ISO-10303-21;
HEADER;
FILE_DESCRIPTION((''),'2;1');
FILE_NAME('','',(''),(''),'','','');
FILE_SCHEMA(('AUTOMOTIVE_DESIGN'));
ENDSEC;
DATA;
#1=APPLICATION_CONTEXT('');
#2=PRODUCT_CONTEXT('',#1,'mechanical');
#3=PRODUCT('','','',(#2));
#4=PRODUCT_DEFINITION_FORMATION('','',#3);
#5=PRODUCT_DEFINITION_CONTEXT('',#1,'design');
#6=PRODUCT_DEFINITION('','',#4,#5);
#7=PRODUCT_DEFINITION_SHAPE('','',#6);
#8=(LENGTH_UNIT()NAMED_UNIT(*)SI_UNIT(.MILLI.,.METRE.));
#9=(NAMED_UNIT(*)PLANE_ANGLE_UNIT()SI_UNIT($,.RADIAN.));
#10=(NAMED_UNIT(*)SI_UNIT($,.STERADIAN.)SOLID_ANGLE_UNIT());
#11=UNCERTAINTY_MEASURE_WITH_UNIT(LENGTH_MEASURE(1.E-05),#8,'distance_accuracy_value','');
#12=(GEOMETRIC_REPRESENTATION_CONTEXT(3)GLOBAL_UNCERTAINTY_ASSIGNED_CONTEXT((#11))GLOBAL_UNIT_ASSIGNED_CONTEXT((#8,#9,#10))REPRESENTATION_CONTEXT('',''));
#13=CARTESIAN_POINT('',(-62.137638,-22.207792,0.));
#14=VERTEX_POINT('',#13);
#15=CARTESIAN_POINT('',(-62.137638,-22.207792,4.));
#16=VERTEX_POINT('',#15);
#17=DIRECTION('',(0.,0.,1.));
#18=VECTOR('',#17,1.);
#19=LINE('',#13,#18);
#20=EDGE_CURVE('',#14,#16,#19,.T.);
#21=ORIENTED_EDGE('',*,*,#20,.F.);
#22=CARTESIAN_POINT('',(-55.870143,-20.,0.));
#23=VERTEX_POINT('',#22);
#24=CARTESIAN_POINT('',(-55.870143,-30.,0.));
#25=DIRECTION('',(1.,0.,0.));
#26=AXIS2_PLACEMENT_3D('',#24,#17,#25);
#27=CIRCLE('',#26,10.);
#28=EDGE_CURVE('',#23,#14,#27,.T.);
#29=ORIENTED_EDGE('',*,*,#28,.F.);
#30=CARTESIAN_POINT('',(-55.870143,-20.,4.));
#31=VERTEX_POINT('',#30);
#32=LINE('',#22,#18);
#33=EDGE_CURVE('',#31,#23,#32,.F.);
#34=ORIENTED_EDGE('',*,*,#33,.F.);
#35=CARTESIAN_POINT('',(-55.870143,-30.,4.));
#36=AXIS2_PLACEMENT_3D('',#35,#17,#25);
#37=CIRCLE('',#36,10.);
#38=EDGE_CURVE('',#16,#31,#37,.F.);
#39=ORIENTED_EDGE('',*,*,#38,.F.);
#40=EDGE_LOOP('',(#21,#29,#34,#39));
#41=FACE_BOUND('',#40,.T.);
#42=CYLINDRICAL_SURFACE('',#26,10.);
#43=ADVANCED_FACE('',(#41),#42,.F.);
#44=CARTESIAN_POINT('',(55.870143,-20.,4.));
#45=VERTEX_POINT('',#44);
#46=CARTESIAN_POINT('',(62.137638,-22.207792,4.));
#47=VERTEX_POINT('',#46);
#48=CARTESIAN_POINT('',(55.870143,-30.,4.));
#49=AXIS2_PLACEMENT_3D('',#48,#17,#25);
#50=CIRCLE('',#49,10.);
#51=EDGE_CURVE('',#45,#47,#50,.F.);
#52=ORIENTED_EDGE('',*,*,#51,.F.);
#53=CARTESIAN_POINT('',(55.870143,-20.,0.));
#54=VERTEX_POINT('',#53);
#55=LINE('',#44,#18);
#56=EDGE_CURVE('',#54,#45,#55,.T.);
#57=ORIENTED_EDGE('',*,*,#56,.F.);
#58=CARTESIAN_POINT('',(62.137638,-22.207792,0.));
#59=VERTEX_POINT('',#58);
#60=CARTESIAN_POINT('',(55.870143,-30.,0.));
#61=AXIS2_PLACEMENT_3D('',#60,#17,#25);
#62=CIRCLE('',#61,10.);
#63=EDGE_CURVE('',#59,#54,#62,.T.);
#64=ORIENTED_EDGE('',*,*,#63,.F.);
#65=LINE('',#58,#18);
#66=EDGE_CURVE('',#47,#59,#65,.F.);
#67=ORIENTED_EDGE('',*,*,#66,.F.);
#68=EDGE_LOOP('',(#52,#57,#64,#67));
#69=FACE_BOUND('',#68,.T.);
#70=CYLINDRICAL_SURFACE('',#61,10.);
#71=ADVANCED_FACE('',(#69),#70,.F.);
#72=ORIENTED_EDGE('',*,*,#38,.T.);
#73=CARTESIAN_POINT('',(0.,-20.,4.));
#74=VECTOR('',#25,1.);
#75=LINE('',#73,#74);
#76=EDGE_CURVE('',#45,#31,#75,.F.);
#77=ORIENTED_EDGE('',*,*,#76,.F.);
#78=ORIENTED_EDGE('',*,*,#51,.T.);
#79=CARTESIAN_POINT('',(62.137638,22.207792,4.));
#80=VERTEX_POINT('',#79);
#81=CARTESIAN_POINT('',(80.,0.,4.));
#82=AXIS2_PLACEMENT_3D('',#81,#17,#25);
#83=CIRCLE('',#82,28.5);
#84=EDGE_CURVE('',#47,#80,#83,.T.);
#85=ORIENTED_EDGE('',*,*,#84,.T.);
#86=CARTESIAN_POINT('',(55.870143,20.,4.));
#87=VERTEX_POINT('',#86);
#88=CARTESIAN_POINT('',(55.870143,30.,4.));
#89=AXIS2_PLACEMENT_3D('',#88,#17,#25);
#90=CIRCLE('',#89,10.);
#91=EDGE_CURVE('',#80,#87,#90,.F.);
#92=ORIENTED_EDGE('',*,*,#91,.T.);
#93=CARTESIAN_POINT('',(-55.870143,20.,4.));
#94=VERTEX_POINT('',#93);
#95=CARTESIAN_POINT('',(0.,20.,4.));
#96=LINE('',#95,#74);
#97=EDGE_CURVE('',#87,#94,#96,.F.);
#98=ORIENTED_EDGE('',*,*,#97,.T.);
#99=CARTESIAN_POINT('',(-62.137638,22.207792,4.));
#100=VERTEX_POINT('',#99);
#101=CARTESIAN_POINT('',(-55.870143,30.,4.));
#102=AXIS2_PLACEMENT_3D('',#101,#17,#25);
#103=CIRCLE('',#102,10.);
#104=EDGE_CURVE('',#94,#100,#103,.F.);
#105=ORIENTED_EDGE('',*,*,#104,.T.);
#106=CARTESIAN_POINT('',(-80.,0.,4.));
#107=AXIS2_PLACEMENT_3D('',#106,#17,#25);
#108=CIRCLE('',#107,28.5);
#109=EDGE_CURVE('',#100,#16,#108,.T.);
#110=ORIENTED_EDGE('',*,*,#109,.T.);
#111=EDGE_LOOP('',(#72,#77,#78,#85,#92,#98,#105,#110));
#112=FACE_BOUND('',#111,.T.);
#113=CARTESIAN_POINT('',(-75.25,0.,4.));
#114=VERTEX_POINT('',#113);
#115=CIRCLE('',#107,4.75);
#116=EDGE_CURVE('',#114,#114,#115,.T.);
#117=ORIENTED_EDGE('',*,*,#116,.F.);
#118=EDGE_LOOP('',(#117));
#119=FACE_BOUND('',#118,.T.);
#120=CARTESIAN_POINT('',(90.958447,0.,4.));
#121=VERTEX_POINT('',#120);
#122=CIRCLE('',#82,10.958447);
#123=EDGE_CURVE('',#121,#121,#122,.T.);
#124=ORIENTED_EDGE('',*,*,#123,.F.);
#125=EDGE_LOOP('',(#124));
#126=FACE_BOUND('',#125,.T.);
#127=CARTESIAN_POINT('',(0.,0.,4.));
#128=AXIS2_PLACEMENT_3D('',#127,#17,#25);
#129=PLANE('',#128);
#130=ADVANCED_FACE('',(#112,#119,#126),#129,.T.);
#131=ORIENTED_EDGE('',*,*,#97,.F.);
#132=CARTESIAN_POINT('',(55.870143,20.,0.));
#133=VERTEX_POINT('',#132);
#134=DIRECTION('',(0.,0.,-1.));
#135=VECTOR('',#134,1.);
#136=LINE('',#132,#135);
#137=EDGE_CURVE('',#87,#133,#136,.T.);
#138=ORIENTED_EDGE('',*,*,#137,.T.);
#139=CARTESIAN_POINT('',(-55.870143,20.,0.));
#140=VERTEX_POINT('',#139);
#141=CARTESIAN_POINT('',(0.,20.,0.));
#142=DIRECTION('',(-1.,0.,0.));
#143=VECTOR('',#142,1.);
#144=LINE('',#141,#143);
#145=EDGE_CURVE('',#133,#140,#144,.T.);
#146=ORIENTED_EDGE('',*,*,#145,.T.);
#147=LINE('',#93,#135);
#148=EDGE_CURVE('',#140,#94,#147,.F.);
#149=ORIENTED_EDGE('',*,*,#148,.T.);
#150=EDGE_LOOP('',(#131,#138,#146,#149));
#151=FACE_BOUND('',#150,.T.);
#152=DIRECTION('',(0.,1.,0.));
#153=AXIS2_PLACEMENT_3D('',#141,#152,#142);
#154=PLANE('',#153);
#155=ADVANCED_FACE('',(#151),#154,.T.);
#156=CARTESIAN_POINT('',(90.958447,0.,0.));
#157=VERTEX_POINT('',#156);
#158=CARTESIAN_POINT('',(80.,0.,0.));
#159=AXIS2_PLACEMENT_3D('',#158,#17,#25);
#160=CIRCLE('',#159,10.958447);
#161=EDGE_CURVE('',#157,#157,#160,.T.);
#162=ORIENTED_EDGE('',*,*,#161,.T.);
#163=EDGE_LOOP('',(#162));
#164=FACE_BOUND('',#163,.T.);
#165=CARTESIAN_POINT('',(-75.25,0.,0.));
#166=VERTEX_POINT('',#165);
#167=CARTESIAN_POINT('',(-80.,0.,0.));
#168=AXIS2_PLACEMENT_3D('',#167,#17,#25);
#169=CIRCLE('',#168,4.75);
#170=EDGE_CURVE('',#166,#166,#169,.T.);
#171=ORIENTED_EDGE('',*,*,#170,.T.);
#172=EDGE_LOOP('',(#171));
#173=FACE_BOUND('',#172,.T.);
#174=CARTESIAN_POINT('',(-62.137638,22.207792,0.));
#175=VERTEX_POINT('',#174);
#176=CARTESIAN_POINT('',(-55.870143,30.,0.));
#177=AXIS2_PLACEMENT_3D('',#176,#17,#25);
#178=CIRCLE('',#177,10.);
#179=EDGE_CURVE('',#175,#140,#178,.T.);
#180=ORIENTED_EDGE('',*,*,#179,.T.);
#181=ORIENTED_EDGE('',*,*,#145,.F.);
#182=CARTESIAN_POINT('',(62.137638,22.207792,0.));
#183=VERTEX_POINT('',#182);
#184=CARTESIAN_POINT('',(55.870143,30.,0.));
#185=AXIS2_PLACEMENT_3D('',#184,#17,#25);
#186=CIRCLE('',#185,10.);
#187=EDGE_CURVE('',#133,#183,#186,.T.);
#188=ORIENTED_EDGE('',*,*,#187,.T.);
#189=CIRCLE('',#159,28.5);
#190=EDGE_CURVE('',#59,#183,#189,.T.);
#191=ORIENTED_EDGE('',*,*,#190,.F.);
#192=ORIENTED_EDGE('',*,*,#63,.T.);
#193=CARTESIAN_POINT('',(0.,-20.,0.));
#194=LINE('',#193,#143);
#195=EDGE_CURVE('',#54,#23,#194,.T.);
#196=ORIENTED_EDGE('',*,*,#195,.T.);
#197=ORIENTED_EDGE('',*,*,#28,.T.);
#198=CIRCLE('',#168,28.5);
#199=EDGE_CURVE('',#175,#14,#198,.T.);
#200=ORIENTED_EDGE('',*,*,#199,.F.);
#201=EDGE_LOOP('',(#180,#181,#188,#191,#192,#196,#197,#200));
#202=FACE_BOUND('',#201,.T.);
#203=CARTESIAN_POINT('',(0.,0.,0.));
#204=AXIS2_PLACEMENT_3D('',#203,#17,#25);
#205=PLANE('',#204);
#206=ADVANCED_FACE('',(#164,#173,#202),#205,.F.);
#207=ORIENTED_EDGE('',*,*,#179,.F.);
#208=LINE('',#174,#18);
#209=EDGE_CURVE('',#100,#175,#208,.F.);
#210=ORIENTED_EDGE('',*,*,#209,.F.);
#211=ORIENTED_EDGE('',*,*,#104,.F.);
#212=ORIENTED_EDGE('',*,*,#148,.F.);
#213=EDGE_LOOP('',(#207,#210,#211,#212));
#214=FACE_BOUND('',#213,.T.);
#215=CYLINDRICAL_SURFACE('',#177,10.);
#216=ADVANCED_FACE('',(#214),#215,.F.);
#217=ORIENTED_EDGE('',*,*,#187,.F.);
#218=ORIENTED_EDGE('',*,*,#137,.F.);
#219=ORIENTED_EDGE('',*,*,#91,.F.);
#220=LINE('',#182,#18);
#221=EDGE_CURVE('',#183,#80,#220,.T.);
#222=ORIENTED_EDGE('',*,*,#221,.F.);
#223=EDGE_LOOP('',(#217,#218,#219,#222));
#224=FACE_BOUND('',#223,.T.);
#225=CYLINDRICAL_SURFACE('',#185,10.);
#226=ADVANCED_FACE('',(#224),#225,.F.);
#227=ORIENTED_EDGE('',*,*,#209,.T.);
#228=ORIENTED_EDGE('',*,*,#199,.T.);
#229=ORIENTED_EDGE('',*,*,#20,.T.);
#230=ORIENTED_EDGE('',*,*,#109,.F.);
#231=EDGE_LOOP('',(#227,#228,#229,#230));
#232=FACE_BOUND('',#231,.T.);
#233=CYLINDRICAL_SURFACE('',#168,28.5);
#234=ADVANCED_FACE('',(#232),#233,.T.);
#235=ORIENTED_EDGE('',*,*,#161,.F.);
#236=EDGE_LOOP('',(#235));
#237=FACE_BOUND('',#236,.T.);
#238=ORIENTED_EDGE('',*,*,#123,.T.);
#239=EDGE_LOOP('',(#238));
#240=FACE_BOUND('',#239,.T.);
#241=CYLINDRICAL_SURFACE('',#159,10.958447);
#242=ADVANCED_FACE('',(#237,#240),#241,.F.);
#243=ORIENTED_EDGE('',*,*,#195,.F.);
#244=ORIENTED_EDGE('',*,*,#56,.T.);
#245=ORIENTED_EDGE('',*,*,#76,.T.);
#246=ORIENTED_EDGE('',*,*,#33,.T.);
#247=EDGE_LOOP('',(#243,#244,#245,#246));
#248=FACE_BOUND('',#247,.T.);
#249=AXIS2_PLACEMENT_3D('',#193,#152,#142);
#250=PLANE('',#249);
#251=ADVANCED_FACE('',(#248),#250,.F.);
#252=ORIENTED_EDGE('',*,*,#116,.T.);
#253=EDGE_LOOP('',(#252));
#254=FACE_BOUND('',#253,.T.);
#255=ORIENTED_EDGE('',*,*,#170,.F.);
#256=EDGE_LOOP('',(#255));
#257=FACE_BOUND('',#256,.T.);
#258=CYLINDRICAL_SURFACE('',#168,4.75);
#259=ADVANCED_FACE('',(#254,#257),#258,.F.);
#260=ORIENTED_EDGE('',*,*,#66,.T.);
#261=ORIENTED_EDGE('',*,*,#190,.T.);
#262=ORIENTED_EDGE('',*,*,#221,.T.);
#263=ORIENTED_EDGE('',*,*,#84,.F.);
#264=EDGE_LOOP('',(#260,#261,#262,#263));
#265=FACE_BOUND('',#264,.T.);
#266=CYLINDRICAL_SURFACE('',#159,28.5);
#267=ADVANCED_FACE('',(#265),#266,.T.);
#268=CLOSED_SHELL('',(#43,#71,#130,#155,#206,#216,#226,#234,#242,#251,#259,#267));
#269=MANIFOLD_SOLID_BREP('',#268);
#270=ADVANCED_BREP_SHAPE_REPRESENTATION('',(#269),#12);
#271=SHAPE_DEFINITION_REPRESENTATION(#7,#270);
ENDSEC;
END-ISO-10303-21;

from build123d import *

# Parameters (mm, degrees)
EXTRUDE_1_DEPTH     = 4
SKETCH_12_R         = 4.75
SKETCH_12_R_2       = 10.958447214
CUT_EXTRUDE_1_DEPTH = 4
FILLET_1_R          = 10


with BuildPart() as part:
    # Sketch 1 → 凸台-拉伸1 (new body)
    with BuildSketch(Plane.XY):
        with BuildLine():
            ThreePointArc((-51.5, 0), (-53.628497347, 10.807120237), (-59.696059496, 20))
            ThreePointArc((-59.696059496, 20), (-108.5, 0), (-59.696059496, -20))
            ThreePointArc((-59.696059496, -20), (-53.628497347, -10.807120237), (-51.5, 0))
        make_face()
        with BuildLine():
            ThreePointArc((59.696059496, -20), (51.5, 0), (59.696059496, 20))
            Line((59.696059496, 20), (-59.696059496, 20))
            ThreePointArc((-59.696059496, 20), (-53.628497347, 10.807120237), (-51.5, 0))
            ThreePointArc((-51.5, 0), (-53.628497347, -10.807120237), (-59.696059496, -20))
            Line((-59.696059496, -20), (59.696059496, -20))
        make_face()
        with BuildLine():
            ThreePointArc((108.5, 0), (90.807120237, 26.371502653), (59.696059496, 20))
            ThreePointArc((59.696059496, 20), (51.5, 0), (59.696059496, -20))
            ThreePointArc((59.696059496, -20), (90.807120237, -26.371502653), (108.5, 0))
        make_face()
    extrude(amount=EXTRUDE_1_DEPTH)

    # 草图12 → 切除-拉伸1 (cut)
    with BuildSketch(Plane.XY.offset(4)):
        with Locations((-80, 0)):
            Circle(SKETCH_12_R)
        with Locations((80, 0)):
            Circle(SKETCH_12_R_2)
    extrude(amount=-CUT_EXTRUDE_1_DEPTH, mode=Mode.SUBTRACT)

    # 圆角1
    fillet_1_edges = [part.edges().sort_by_distance(p)[0] for p in [
        (-59.696059496, -20, 2),
        (59.696059496, -20, 2),
        (59.696059496, 20, 2),
        (-59.696059496, 20, 2),
    ]]
    fillet(fillet_1_edges, radius=FILLET_1_R)


solid = part.part
